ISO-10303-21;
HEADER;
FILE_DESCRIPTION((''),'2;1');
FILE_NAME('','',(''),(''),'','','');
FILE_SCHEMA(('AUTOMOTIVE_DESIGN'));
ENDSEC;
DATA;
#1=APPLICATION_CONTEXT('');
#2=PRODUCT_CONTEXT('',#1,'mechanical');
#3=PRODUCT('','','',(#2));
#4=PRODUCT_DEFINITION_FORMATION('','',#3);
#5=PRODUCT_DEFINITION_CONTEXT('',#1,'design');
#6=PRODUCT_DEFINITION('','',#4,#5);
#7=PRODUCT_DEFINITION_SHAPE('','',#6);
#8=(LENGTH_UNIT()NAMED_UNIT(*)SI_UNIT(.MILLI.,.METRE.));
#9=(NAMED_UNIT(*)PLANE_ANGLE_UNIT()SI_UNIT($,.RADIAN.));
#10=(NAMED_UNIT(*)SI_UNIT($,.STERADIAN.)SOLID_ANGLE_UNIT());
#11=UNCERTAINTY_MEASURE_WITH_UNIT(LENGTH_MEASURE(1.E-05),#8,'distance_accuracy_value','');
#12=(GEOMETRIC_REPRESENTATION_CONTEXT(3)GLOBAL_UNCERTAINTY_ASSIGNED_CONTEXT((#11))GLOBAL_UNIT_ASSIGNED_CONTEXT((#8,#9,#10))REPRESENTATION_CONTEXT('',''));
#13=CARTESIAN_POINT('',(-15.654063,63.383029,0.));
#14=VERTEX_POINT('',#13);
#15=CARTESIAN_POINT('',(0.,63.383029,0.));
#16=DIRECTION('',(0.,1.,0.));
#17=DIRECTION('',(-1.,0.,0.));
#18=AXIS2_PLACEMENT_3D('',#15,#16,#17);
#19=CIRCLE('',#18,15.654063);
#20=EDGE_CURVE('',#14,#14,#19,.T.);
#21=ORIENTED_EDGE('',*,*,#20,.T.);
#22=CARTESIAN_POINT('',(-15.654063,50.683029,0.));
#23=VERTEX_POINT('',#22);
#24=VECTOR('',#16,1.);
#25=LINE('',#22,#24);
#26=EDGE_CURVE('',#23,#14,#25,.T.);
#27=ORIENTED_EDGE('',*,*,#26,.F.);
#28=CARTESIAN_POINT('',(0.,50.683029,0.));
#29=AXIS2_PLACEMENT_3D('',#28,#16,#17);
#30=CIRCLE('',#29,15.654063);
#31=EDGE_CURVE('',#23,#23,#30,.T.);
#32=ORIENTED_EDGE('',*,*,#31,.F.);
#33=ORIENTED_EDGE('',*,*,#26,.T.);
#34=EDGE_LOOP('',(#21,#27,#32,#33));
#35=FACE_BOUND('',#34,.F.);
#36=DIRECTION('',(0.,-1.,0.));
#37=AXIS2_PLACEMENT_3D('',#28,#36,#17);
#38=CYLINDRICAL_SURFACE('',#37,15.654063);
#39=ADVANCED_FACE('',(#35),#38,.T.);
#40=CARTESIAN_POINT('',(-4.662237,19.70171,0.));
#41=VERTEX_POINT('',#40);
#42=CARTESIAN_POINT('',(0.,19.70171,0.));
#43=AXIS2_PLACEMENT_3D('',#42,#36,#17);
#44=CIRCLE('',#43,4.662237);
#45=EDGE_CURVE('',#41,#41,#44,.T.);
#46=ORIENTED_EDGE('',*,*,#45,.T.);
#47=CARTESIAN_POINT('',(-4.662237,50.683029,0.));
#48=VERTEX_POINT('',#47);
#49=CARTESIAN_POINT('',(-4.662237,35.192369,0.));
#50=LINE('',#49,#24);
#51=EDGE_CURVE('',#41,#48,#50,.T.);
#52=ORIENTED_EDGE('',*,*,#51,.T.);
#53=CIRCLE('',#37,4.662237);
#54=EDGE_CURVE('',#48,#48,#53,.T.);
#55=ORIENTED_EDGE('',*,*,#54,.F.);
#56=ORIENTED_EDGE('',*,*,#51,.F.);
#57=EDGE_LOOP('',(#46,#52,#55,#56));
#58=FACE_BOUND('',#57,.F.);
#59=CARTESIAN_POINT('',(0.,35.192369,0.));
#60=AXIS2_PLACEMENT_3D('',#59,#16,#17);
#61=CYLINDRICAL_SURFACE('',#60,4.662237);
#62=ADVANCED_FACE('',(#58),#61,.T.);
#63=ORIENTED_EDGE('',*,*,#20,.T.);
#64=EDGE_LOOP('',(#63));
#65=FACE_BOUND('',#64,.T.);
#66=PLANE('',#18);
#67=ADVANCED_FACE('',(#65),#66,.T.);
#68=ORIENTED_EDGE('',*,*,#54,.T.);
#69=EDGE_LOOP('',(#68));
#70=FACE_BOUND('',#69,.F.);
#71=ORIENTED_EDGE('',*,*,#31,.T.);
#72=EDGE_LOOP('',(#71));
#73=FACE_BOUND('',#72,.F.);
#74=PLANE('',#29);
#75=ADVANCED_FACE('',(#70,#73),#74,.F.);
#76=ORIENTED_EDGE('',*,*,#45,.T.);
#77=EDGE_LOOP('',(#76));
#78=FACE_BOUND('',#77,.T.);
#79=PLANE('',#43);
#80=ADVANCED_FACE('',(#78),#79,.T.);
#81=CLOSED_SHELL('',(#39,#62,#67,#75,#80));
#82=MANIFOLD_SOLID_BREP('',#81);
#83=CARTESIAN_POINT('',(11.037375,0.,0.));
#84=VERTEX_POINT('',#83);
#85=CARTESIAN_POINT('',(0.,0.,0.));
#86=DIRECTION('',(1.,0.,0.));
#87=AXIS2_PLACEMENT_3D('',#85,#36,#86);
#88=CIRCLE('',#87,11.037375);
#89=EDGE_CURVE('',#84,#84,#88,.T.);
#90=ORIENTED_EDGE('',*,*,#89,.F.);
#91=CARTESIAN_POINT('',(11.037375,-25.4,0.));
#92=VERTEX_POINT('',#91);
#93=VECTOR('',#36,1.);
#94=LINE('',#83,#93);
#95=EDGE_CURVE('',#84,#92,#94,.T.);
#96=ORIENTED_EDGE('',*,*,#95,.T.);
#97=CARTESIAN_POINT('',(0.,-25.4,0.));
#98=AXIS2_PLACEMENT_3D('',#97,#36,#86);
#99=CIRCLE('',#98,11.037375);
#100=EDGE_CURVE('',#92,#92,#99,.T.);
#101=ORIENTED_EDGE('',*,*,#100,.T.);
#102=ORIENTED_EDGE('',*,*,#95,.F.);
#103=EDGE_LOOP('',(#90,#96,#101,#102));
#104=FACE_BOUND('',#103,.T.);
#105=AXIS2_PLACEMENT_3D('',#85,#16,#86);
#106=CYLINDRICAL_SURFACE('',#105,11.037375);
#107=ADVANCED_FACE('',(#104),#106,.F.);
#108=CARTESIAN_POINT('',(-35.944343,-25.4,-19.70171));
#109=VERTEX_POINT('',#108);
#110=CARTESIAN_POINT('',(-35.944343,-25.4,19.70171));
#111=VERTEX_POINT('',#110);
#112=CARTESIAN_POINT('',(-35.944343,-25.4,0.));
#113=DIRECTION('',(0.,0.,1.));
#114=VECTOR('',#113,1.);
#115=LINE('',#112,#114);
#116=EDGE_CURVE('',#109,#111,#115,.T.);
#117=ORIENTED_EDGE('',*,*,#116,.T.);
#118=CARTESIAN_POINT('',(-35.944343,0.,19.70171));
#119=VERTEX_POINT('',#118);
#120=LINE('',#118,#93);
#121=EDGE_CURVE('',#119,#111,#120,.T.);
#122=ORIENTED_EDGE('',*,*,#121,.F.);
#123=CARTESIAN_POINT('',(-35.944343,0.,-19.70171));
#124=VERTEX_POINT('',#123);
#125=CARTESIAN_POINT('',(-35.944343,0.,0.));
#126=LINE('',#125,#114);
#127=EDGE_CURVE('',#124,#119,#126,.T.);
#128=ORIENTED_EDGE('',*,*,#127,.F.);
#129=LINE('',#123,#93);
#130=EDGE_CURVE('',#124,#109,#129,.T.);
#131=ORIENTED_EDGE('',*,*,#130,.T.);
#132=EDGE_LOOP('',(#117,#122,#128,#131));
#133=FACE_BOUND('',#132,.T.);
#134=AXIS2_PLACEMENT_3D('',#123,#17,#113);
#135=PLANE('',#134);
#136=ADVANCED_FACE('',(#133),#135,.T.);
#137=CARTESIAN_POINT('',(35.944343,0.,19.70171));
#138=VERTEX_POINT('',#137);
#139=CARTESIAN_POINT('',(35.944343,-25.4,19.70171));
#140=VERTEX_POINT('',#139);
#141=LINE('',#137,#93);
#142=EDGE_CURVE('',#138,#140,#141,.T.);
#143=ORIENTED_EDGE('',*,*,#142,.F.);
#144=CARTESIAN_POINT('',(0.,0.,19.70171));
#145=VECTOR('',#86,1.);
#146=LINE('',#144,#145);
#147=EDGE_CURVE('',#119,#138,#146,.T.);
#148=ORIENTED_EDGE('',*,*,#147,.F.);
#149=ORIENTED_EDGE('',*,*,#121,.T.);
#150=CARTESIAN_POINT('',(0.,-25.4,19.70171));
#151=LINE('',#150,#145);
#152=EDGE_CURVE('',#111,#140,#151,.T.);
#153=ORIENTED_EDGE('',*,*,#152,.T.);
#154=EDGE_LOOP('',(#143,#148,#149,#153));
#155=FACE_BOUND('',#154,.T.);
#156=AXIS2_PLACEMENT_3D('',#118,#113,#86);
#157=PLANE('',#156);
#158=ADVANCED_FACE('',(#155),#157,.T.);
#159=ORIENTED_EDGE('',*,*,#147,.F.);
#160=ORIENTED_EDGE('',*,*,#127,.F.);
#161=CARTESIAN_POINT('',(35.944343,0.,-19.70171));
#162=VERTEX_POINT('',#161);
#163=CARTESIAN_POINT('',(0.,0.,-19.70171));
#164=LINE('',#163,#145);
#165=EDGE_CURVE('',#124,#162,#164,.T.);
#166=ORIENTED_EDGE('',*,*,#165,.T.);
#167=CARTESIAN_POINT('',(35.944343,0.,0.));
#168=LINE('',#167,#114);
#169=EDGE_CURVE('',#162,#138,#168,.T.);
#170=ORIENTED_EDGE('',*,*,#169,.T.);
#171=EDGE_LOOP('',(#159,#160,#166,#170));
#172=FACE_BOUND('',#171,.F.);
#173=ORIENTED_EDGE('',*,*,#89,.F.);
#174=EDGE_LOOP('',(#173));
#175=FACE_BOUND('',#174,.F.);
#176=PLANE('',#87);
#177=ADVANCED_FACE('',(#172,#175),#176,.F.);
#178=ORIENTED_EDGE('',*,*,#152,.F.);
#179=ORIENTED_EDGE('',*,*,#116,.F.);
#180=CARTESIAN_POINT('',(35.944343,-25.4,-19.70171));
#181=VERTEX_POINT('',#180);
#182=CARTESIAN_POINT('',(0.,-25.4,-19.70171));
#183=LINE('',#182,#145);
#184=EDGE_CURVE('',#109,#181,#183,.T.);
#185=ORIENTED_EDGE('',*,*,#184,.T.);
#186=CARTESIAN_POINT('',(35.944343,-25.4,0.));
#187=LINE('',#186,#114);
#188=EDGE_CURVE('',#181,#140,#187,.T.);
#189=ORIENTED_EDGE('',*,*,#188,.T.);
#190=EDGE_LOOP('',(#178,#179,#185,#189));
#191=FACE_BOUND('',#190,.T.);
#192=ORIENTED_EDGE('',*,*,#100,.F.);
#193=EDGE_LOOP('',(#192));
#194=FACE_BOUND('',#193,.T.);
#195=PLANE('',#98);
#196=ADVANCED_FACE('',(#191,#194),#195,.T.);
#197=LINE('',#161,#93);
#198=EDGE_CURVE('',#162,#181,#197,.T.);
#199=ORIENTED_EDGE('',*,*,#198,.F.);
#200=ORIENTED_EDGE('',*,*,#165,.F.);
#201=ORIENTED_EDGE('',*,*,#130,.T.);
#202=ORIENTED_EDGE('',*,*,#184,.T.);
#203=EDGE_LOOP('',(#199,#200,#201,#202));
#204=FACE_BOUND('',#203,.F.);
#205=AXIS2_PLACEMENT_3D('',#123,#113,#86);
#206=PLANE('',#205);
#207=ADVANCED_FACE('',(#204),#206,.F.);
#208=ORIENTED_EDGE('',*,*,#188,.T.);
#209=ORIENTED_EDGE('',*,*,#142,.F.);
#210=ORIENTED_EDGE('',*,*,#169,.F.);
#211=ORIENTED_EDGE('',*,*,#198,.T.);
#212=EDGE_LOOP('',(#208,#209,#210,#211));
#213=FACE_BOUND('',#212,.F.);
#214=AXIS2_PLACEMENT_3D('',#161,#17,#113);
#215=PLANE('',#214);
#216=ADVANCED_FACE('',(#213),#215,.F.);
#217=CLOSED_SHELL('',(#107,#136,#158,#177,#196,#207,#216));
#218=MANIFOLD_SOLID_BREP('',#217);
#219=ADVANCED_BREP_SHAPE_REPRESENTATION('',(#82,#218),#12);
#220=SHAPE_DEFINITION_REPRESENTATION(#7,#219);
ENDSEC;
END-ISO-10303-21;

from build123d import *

# Parameters (mm, degrees)
F0_W     = 71.8886852264
F0_H     = 39.4034199417
F0_R     = 11.0373751876
F1_DEPTH = 25.4
F2_W     = 4.6622366644
F2_H     = 30.9813190252
F4_R     = 15.6540628249
F5_DEPTH = 12.7


with BuildPart() as f1:
    # F0 (on Front) → F1 (new body)
    with BuildSketch(Plane.XZ):
        Rectangle(F0_W, F0_H)
        Circle(F0_R, mode=Mode.SUBTRACT)
    extrude(amount=F1_DEPTH)


with BuildPart() as f3:
    # F2 (on Top) → F3 (revolve)
    with BuildSketch(Plane.XY):
        with Locations((-2.3311183322, 35.1923694834)):
            Rectangle(F2_W, F2_H)
    revolve(axis=Axis((0, 35.1923694834, 0), (0, -1, 0)))

    # F4 (on face) → F5 (join)
    with BuildSketch(Plane(origin=(0, 50.683028996, 0), x_dir=(-1, 0, 0), z_dir=(0, 1, 0))):
        Circle(F4_R)
    extrude(amount=F5_DEPTH)


solid = Compound([f1.part, f3.part])
